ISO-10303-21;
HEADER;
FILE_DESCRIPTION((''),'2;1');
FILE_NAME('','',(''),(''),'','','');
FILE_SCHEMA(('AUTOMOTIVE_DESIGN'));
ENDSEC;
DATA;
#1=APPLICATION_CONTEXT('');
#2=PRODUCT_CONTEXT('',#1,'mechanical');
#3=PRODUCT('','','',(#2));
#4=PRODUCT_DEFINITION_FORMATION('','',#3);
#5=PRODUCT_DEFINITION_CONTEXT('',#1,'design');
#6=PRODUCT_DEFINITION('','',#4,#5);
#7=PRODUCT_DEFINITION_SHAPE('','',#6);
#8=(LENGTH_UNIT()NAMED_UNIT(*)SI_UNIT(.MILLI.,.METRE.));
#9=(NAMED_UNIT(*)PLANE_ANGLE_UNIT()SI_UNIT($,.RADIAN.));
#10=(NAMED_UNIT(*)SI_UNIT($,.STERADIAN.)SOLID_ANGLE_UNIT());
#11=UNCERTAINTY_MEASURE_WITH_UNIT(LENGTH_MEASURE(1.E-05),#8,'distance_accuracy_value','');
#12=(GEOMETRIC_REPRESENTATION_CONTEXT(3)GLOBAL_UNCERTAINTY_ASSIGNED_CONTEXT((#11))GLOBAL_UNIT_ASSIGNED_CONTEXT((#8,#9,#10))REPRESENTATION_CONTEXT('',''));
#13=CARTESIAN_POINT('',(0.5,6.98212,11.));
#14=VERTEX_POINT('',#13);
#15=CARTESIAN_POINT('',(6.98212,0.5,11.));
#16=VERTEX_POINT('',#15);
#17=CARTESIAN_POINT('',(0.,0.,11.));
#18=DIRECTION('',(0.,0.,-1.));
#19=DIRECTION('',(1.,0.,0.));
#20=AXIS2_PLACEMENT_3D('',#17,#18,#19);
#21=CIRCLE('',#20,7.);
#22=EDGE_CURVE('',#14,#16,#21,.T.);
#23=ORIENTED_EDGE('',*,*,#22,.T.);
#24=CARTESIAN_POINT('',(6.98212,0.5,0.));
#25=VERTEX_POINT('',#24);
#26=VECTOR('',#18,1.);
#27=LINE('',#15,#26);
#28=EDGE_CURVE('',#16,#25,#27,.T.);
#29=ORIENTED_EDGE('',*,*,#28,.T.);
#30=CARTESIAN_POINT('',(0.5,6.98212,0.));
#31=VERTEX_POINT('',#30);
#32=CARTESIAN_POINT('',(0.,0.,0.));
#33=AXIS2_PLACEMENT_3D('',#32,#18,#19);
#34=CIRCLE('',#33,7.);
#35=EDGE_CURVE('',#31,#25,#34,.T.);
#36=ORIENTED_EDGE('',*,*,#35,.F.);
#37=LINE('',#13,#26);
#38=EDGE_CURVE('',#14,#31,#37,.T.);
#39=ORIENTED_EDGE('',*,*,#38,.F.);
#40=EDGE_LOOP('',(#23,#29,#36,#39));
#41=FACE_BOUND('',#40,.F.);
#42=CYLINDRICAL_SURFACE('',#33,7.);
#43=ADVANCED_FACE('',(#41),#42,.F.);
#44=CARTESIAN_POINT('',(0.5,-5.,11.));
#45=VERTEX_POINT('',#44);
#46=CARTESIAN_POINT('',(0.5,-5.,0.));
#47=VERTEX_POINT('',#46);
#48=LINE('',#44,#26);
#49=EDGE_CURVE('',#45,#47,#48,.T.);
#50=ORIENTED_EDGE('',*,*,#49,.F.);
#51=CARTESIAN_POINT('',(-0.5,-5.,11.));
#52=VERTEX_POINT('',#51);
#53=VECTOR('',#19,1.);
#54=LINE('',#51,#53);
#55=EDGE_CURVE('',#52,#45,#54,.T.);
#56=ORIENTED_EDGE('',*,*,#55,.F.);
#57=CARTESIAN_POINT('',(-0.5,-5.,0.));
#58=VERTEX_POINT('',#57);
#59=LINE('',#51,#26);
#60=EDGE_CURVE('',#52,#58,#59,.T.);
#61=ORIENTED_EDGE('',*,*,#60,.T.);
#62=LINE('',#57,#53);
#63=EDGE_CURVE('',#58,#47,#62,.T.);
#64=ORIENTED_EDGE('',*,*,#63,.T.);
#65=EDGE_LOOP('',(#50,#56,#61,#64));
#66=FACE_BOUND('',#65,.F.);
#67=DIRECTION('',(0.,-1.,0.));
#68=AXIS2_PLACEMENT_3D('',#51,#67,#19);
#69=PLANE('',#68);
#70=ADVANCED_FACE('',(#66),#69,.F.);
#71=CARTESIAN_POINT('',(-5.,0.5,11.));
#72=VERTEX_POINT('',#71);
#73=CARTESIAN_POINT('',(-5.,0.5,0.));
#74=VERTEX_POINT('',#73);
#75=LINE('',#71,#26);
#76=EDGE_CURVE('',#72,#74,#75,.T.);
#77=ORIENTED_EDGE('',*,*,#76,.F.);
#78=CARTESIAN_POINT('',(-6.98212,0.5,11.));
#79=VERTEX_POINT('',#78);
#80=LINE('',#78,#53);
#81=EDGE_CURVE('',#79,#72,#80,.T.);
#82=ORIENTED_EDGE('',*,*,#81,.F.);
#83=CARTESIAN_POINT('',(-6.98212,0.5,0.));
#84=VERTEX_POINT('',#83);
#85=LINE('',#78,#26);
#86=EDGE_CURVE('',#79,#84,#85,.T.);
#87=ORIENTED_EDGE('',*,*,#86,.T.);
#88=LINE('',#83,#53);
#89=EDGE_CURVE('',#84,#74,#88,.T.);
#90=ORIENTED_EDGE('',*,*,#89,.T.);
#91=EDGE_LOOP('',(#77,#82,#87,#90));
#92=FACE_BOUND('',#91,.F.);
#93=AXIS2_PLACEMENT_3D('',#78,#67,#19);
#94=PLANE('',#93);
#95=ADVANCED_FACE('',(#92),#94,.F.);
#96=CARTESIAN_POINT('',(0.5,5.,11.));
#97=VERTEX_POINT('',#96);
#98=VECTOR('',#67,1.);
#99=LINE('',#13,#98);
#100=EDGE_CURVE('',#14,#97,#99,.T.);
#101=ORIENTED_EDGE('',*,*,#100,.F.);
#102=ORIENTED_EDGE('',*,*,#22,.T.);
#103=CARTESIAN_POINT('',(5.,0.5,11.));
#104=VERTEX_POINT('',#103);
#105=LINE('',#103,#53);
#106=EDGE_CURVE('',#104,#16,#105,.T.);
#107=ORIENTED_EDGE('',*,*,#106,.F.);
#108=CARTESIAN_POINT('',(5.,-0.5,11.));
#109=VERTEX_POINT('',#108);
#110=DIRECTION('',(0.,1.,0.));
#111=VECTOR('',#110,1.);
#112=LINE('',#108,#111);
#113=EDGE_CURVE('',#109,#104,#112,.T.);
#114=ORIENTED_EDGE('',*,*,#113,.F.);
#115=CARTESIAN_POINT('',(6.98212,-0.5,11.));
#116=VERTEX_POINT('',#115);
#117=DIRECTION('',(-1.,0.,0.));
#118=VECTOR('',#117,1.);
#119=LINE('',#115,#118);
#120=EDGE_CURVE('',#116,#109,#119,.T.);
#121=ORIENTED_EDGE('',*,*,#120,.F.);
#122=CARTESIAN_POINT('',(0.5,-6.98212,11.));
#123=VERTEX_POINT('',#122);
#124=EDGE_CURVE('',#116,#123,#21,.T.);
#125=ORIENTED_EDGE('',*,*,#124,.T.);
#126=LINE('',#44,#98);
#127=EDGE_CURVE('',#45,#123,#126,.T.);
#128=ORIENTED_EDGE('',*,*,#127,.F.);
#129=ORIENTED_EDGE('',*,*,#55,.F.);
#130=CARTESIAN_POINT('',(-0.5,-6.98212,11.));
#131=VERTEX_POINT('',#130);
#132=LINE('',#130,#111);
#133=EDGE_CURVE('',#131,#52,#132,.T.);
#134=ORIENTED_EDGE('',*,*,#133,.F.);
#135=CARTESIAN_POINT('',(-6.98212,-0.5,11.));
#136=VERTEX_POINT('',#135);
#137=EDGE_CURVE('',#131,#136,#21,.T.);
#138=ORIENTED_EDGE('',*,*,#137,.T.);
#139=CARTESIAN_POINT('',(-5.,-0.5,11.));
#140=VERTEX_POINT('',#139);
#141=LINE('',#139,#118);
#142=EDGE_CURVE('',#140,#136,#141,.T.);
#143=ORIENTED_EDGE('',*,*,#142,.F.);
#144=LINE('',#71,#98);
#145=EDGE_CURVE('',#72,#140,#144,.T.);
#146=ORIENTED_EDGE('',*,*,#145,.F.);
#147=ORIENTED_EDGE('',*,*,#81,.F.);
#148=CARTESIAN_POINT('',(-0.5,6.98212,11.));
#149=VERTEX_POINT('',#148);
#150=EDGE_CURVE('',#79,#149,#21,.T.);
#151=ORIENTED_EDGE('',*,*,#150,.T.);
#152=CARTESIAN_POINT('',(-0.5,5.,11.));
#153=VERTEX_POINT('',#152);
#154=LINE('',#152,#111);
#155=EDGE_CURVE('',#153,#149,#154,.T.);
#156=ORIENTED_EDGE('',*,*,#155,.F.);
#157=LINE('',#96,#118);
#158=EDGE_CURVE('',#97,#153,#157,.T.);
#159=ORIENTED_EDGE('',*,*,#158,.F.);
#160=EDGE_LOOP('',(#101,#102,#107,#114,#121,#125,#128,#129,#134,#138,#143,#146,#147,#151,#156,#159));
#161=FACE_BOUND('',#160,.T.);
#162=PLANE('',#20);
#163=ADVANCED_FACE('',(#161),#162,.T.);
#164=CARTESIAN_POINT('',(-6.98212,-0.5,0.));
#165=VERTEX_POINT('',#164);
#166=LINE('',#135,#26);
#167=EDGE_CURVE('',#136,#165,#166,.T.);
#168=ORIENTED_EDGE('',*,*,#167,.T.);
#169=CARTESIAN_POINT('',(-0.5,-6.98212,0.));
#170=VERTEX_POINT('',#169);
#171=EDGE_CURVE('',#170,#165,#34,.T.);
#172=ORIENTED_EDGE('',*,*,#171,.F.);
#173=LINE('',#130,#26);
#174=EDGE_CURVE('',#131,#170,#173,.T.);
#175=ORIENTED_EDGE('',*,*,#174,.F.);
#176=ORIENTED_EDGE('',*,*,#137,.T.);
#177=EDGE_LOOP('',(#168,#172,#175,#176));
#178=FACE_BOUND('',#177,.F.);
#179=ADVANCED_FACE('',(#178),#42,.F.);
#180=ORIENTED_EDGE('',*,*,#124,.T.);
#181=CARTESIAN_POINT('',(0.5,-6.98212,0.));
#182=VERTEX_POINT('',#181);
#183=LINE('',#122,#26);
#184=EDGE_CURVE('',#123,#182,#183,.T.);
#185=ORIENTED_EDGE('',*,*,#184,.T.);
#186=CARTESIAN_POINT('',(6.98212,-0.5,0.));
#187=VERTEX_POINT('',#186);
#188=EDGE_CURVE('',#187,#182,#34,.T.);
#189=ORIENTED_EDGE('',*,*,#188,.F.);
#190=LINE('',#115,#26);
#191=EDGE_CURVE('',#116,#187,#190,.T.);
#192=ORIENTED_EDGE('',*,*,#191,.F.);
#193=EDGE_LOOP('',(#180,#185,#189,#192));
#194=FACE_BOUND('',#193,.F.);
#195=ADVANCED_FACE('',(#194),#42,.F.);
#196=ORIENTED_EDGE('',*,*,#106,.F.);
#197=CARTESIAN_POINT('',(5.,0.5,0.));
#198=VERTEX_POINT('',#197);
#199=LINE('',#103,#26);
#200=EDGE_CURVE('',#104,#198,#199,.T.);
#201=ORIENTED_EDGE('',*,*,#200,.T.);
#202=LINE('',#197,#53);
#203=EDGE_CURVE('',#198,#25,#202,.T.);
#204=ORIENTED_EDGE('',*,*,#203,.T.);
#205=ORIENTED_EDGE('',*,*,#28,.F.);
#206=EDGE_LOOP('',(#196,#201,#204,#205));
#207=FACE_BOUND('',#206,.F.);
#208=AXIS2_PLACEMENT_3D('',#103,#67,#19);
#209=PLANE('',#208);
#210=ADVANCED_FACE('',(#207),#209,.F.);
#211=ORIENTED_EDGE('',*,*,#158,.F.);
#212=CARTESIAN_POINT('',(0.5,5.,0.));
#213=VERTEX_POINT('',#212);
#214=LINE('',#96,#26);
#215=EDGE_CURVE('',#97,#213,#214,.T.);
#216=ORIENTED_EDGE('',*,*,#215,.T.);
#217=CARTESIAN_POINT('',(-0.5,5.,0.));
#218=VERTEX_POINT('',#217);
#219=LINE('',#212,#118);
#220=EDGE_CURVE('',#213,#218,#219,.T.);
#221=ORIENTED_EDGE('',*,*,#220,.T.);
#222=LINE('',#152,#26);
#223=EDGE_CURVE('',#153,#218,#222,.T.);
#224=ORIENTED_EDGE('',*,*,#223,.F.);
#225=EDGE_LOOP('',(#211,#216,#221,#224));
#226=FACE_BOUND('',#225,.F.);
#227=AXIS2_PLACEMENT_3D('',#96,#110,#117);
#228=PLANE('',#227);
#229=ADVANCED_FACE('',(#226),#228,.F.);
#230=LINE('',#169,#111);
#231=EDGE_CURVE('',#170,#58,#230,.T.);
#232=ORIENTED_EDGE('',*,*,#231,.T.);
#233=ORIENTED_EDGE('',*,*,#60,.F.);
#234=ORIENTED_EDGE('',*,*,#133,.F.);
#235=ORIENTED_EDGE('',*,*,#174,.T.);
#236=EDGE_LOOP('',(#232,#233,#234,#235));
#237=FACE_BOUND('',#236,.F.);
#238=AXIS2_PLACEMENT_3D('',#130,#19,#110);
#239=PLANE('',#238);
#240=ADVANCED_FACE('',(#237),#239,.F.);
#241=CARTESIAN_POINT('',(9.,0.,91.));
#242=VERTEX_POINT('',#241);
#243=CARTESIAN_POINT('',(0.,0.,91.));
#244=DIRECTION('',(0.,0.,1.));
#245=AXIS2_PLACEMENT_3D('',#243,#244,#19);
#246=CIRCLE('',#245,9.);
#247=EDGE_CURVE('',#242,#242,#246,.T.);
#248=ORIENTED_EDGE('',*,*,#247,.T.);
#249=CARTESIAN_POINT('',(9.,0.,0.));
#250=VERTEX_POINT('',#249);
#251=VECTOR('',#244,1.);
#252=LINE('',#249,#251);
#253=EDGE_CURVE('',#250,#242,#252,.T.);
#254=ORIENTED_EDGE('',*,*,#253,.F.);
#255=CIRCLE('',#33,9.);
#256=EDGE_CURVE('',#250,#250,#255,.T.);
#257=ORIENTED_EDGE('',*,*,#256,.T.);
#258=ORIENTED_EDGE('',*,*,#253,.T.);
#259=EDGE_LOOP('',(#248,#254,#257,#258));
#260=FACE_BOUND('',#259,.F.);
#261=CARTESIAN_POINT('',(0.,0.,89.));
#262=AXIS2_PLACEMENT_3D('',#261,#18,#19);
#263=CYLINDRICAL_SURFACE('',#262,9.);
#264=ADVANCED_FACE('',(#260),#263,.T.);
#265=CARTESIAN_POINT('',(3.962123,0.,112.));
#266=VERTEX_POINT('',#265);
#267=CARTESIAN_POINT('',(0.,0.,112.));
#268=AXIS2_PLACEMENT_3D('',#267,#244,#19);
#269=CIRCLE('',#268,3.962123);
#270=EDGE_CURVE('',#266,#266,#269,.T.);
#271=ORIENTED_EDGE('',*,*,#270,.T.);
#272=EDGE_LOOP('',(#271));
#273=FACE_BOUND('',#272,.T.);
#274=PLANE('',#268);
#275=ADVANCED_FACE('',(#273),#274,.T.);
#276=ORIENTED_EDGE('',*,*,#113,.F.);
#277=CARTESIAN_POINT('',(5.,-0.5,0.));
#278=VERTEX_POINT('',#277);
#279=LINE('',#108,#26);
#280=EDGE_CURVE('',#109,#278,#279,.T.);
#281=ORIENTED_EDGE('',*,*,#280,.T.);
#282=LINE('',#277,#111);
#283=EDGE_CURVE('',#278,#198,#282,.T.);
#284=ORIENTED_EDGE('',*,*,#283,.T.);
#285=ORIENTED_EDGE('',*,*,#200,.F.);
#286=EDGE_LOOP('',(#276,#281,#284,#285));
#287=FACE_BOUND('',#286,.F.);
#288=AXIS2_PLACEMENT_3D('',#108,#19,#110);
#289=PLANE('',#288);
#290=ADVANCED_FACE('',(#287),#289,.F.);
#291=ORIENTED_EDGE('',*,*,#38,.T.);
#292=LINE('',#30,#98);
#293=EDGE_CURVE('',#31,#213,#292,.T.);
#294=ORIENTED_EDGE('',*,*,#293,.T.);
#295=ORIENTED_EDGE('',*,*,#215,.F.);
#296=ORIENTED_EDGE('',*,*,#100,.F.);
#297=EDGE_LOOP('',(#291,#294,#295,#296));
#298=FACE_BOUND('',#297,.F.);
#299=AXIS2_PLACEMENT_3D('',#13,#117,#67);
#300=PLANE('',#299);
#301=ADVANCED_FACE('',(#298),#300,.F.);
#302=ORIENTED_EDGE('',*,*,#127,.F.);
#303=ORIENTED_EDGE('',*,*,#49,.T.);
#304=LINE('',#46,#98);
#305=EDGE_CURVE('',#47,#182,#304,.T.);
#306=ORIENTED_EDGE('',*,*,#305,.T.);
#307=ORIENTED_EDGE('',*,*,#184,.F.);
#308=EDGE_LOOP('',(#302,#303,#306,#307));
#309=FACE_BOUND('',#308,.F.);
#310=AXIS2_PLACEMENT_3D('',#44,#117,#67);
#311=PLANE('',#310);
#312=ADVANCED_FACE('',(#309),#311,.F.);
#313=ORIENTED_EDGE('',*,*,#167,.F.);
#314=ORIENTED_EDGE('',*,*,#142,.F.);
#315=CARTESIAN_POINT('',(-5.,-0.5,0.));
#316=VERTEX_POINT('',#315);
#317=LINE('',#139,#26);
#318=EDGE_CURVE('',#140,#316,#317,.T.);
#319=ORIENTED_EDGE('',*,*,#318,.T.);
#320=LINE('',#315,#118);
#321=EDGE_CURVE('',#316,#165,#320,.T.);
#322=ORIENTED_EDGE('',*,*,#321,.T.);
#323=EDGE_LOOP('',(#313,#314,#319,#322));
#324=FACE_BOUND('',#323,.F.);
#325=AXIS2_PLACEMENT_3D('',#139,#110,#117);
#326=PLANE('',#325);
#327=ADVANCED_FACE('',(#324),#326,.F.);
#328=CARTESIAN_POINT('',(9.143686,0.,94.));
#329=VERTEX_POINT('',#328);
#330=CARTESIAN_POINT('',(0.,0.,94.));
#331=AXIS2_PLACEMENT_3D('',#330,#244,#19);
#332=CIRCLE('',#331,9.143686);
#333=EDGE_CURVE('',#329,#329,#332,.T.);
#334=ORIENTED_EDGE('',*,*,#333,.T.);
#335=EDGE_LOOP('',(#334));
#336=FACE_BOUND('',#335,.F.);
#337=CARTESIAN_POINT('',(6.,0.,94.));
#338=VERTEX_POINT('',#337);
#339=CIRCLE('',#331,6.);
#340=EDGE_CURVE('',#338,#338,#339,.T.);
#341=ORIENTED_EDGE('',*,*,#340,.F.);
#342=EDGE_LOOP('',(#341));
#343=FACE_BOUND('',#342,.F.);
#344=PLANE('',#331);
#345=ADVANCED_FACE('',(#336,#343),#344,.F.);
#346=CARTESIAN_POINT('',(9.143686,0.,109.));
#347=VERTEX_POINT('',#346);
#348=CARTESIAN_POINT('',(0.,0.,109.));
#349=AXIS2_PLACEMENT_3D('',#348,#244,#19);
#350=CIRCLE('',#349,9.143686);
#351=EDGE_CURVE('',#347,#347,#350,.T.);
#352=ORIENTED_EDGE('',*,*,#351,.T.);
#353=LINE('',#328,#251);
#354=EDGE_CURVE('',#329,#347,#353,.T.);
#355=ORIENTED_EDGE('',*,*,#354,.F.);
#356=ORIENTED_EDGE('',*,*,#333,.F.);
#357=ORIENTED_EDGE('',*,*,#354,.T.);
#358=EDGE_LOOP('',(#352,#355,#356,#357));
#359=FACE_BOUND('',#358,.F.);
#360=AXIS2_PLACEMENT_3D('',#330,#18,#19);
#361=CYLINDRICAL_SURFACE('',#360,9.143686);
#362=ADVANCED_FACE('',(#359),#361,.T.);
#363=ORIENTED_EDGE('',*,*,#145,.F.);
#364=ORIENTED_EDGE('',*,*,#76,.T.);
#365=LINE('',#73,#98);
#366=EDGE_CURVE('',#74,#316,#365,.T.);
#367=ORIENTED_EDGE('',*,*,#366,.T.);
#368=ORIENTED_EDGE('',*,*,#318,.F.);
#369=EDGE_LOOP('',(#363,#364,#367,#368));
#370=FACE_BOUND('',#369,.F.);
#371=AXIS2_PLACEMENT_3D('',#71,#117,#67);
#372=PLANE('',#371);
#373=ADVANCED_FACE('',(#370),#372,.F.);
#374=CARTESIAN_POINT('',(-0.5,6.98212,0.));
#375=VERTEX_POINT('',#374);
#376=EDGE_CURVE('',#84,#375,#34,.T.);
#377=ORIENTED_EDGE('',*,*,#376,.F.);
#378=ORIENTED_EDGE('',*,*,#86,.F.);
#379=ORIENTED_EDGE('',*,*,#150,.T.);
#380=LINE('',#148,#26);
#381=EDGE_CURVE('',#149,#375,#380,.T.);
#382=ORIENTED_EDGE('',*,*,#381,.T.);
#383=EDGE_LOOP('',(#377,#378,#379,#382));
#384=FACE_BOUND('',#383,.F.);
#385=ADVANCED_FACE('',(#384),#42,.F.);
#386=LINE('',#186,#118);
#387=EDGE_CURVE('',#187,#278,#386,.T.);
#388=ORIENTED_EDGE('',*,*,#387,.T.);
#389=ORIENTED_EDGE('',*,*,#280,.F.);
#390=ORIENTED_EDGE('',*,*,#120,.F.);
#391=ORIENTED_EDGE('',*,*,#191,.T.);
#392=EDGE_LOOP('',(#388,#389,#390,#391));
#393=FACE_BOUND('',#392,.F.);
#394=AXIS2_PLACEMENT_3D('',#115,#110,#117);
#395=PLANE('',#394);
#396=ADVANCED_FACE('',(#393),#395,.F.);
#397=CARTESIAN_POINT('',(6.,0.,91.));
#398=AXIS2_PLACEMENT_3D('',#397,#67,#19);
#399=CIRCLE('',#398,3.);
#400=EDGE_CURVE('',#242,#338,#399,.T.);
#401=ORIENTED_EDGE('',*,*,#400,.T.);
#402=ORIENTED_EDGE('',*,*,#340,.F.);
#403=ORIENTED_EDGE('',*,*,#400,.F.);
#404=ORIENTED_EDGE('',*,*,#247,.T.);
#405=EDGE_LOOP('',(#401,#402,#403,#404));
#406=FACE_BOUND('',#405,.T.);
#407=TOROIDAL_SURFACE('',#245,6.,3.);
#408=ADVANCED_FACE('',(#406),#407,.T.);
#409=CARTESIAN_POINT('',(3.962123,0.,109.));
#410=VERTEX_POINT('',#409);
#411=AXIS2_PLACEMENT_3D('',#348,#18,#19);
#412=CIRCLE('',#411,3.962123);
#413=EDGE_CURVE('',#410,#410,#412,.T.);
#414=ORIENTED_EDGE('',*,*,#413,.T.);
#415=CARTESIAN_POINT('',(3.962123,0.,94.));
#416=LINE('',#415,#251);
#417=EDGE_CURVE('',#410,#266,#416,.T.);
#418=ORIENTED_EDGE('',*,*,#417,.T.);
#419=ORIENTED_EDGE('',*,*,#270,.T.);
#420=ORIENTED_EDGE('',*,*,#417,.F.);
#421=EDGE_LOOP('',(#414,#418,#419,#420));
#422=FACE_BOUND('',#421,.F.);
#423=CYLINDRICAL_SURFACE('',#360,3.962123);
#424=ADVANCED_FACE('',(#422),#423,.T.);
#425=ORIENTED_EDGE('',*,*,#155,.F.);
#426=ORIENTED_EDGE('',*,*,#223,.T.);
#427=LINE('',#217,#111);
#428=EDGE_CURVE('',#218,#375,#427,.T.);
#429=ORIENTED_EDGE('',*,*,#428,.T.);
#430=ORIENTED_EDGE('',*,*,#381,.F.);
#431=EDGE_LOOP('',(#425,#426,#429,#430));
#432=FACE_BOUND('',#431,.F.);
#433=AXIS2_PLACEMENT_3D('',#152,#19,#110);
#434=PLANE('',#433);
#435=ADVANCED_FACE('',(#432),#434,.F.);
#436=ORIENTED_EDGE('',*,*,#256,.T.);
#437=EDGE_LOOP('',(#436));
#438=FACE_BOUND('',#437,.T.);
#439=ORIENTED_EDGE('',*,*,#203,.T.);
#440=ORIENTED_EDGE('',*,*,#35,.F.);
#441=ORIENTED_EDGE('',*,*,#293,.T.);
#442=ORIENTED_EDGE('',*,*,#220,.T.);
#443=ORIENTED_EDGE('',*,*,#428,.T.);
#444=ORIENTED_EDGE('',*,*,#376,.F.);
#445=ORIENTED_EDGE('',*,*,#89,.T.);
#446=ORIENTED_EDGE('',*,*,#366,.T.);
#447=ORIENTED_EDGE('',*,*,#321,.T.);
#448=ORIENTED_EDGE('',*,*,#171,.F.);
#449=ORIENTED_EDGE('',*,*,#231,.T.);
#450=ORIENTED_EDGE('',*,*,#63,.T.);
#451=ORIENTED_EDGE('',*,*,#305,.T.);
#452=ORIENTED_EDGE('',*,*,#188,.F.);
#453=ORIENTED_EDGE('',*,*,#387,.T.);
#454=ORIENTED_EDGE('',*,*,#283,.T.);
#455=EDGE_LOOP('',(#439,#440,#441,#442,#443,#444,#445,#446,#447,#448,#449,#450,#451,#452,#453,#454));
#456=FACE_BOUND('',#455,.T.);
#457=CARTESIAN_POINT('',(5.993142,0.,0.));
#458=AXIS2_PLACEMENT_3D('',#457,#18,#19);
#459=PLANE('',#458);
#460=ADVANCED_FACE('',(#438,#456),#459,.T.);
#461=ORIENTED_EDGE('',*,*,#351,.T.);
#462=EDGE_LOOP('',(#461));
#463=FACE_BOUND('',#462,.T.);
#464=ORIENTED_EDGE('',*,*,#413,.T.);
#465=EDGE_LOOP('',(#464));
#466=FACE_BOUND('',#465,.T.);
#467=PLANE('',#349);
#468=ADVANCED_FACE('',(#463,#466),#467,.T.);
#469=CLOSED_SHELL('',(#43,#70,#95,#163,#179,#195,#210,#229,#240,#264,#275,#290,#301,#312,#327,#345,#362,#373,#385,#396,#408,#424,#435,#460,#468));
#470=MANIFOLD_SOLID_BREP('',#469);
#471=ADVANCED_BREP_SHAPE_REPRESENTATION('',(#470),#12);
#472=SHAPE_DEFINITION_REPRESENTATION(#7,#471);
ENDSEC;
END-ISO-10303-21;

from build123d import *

# Parameters (mm, degrees)
F0_W      = 9
F0_H      = 89
F2_R      = 9
F3_DEPTH  = 5
F4_R      = 3
F5_R      = 7
F6_DEPTH  = 11
F8_DEPTH  = 11
F10_R     = 3.9621233683
F11_DEPTH = 18
F9_R      = 9.1436864808
F12_DEPTH = 15


with BuildPart() as f1:
    # F0 (on Front) → F1 (revolve)
    with BuildSketch(Plane.XZ):
        with Locations((4.5, 44.5)):
            Rectangle(F0_W, F0_H)
    revolve(axis=Axis((0, 0, 44.5), (0, 0, -1)))

    # F2 (on face) → F3 (join)
    with BuildSketch(Plane.XY.offset(89)):
        Circle(F2_R)
    extrude(amount=F3_DEPTH)

    # F4
    f4_edges = [f1.edges().sort_by_distance(p)[0] for p in [
        (-9, 0, 94),
    ]]
    fillet(f4_edges, radius=F4_R)

    # F5 (on face) → F6 (cut)
    with BuildSketch(Plane(origin=(0, 0, 0), x_dir=(1, 0, 0), z_dir=(0, 0, -1))):
        Circle(F5_R)
    extrude(amount=-F6_DEPTH, mode=Mode.SUBTRACT)

    # F7 (on face) → F8 (join)
    with BuildSketch(Plane(origin=(0, 0, 11), x_dir=(1, 0, 0), z_dir=(0, 0, -1))):
        with BuildLine():
            Line((-0.5, 5), (0, 5))
            Line((0, 5), (0.5, 5))
            Line((0.5, 5), (0.5, 6.9821200219))
            ThreePointArc((0.5, 6.9821200219), (0, 7), (-0.5, 6.9821200219))
            Line((-0.5, 6.9821200219), (-0.5, 5))
        make_face()
        with BuildLine():
            ThreePointArc((7, 0), (6.9955285774, 0.2501597957), (6.9821200219, 0.5))
            Line((6.9821200219, 0.5), (5, 0.5))
            Line((5, 0.5), (5, 0))
            Line((5, 0), (5, -0.5))
            Line((5, -0.5), (6.9821200219, -0.5))
            ThreePointArc((6.9821200219, -0.5), (6.9955285774, -0.2501597957), (7, 0))
        make_face()
        with BuildLine():
            Line((-5, 0.5), (-6.9821200219, 0.5))
            ThreePointArc((-6.9821200219, 0.5), (-7, 0), (-6.9821200219, -0.5))
            Line((-6.9821200219, -0.5), (-5, -0.5))
            Line((-5, -0.5), (-5, 0))
            Line((-5, 0), (-5, 0.5))
        make_face()
        with BuildLine():
            Line((-0.5, -5), (-0.5, -6.9821200219))
            ThreePointArc((-0.5, -6.9821200219), (0, -7), (0.5, -6.9821200219))
            Line((0.5, -6.9821200219), (0.5, -5))
            Line((0.5, -5), (0, -5))
            Line((0, -5), (-0.5, -5))
        make_face()
    extrude(amount=F8_DEPTH)

    # F10 (on face) → F11 (join)
    with BuildSketch(Plane.XY.offset(94)):
        Circle(F10_R)
    extrude(amount=F11_DEPTH)

    # F9 (on face) → F12 (join)
    with BuildSketch(Plane.XY.offset(94)):
        Circle(F9_R)
    extrude(amount=F12_DEPTH)


solid = f1.part
